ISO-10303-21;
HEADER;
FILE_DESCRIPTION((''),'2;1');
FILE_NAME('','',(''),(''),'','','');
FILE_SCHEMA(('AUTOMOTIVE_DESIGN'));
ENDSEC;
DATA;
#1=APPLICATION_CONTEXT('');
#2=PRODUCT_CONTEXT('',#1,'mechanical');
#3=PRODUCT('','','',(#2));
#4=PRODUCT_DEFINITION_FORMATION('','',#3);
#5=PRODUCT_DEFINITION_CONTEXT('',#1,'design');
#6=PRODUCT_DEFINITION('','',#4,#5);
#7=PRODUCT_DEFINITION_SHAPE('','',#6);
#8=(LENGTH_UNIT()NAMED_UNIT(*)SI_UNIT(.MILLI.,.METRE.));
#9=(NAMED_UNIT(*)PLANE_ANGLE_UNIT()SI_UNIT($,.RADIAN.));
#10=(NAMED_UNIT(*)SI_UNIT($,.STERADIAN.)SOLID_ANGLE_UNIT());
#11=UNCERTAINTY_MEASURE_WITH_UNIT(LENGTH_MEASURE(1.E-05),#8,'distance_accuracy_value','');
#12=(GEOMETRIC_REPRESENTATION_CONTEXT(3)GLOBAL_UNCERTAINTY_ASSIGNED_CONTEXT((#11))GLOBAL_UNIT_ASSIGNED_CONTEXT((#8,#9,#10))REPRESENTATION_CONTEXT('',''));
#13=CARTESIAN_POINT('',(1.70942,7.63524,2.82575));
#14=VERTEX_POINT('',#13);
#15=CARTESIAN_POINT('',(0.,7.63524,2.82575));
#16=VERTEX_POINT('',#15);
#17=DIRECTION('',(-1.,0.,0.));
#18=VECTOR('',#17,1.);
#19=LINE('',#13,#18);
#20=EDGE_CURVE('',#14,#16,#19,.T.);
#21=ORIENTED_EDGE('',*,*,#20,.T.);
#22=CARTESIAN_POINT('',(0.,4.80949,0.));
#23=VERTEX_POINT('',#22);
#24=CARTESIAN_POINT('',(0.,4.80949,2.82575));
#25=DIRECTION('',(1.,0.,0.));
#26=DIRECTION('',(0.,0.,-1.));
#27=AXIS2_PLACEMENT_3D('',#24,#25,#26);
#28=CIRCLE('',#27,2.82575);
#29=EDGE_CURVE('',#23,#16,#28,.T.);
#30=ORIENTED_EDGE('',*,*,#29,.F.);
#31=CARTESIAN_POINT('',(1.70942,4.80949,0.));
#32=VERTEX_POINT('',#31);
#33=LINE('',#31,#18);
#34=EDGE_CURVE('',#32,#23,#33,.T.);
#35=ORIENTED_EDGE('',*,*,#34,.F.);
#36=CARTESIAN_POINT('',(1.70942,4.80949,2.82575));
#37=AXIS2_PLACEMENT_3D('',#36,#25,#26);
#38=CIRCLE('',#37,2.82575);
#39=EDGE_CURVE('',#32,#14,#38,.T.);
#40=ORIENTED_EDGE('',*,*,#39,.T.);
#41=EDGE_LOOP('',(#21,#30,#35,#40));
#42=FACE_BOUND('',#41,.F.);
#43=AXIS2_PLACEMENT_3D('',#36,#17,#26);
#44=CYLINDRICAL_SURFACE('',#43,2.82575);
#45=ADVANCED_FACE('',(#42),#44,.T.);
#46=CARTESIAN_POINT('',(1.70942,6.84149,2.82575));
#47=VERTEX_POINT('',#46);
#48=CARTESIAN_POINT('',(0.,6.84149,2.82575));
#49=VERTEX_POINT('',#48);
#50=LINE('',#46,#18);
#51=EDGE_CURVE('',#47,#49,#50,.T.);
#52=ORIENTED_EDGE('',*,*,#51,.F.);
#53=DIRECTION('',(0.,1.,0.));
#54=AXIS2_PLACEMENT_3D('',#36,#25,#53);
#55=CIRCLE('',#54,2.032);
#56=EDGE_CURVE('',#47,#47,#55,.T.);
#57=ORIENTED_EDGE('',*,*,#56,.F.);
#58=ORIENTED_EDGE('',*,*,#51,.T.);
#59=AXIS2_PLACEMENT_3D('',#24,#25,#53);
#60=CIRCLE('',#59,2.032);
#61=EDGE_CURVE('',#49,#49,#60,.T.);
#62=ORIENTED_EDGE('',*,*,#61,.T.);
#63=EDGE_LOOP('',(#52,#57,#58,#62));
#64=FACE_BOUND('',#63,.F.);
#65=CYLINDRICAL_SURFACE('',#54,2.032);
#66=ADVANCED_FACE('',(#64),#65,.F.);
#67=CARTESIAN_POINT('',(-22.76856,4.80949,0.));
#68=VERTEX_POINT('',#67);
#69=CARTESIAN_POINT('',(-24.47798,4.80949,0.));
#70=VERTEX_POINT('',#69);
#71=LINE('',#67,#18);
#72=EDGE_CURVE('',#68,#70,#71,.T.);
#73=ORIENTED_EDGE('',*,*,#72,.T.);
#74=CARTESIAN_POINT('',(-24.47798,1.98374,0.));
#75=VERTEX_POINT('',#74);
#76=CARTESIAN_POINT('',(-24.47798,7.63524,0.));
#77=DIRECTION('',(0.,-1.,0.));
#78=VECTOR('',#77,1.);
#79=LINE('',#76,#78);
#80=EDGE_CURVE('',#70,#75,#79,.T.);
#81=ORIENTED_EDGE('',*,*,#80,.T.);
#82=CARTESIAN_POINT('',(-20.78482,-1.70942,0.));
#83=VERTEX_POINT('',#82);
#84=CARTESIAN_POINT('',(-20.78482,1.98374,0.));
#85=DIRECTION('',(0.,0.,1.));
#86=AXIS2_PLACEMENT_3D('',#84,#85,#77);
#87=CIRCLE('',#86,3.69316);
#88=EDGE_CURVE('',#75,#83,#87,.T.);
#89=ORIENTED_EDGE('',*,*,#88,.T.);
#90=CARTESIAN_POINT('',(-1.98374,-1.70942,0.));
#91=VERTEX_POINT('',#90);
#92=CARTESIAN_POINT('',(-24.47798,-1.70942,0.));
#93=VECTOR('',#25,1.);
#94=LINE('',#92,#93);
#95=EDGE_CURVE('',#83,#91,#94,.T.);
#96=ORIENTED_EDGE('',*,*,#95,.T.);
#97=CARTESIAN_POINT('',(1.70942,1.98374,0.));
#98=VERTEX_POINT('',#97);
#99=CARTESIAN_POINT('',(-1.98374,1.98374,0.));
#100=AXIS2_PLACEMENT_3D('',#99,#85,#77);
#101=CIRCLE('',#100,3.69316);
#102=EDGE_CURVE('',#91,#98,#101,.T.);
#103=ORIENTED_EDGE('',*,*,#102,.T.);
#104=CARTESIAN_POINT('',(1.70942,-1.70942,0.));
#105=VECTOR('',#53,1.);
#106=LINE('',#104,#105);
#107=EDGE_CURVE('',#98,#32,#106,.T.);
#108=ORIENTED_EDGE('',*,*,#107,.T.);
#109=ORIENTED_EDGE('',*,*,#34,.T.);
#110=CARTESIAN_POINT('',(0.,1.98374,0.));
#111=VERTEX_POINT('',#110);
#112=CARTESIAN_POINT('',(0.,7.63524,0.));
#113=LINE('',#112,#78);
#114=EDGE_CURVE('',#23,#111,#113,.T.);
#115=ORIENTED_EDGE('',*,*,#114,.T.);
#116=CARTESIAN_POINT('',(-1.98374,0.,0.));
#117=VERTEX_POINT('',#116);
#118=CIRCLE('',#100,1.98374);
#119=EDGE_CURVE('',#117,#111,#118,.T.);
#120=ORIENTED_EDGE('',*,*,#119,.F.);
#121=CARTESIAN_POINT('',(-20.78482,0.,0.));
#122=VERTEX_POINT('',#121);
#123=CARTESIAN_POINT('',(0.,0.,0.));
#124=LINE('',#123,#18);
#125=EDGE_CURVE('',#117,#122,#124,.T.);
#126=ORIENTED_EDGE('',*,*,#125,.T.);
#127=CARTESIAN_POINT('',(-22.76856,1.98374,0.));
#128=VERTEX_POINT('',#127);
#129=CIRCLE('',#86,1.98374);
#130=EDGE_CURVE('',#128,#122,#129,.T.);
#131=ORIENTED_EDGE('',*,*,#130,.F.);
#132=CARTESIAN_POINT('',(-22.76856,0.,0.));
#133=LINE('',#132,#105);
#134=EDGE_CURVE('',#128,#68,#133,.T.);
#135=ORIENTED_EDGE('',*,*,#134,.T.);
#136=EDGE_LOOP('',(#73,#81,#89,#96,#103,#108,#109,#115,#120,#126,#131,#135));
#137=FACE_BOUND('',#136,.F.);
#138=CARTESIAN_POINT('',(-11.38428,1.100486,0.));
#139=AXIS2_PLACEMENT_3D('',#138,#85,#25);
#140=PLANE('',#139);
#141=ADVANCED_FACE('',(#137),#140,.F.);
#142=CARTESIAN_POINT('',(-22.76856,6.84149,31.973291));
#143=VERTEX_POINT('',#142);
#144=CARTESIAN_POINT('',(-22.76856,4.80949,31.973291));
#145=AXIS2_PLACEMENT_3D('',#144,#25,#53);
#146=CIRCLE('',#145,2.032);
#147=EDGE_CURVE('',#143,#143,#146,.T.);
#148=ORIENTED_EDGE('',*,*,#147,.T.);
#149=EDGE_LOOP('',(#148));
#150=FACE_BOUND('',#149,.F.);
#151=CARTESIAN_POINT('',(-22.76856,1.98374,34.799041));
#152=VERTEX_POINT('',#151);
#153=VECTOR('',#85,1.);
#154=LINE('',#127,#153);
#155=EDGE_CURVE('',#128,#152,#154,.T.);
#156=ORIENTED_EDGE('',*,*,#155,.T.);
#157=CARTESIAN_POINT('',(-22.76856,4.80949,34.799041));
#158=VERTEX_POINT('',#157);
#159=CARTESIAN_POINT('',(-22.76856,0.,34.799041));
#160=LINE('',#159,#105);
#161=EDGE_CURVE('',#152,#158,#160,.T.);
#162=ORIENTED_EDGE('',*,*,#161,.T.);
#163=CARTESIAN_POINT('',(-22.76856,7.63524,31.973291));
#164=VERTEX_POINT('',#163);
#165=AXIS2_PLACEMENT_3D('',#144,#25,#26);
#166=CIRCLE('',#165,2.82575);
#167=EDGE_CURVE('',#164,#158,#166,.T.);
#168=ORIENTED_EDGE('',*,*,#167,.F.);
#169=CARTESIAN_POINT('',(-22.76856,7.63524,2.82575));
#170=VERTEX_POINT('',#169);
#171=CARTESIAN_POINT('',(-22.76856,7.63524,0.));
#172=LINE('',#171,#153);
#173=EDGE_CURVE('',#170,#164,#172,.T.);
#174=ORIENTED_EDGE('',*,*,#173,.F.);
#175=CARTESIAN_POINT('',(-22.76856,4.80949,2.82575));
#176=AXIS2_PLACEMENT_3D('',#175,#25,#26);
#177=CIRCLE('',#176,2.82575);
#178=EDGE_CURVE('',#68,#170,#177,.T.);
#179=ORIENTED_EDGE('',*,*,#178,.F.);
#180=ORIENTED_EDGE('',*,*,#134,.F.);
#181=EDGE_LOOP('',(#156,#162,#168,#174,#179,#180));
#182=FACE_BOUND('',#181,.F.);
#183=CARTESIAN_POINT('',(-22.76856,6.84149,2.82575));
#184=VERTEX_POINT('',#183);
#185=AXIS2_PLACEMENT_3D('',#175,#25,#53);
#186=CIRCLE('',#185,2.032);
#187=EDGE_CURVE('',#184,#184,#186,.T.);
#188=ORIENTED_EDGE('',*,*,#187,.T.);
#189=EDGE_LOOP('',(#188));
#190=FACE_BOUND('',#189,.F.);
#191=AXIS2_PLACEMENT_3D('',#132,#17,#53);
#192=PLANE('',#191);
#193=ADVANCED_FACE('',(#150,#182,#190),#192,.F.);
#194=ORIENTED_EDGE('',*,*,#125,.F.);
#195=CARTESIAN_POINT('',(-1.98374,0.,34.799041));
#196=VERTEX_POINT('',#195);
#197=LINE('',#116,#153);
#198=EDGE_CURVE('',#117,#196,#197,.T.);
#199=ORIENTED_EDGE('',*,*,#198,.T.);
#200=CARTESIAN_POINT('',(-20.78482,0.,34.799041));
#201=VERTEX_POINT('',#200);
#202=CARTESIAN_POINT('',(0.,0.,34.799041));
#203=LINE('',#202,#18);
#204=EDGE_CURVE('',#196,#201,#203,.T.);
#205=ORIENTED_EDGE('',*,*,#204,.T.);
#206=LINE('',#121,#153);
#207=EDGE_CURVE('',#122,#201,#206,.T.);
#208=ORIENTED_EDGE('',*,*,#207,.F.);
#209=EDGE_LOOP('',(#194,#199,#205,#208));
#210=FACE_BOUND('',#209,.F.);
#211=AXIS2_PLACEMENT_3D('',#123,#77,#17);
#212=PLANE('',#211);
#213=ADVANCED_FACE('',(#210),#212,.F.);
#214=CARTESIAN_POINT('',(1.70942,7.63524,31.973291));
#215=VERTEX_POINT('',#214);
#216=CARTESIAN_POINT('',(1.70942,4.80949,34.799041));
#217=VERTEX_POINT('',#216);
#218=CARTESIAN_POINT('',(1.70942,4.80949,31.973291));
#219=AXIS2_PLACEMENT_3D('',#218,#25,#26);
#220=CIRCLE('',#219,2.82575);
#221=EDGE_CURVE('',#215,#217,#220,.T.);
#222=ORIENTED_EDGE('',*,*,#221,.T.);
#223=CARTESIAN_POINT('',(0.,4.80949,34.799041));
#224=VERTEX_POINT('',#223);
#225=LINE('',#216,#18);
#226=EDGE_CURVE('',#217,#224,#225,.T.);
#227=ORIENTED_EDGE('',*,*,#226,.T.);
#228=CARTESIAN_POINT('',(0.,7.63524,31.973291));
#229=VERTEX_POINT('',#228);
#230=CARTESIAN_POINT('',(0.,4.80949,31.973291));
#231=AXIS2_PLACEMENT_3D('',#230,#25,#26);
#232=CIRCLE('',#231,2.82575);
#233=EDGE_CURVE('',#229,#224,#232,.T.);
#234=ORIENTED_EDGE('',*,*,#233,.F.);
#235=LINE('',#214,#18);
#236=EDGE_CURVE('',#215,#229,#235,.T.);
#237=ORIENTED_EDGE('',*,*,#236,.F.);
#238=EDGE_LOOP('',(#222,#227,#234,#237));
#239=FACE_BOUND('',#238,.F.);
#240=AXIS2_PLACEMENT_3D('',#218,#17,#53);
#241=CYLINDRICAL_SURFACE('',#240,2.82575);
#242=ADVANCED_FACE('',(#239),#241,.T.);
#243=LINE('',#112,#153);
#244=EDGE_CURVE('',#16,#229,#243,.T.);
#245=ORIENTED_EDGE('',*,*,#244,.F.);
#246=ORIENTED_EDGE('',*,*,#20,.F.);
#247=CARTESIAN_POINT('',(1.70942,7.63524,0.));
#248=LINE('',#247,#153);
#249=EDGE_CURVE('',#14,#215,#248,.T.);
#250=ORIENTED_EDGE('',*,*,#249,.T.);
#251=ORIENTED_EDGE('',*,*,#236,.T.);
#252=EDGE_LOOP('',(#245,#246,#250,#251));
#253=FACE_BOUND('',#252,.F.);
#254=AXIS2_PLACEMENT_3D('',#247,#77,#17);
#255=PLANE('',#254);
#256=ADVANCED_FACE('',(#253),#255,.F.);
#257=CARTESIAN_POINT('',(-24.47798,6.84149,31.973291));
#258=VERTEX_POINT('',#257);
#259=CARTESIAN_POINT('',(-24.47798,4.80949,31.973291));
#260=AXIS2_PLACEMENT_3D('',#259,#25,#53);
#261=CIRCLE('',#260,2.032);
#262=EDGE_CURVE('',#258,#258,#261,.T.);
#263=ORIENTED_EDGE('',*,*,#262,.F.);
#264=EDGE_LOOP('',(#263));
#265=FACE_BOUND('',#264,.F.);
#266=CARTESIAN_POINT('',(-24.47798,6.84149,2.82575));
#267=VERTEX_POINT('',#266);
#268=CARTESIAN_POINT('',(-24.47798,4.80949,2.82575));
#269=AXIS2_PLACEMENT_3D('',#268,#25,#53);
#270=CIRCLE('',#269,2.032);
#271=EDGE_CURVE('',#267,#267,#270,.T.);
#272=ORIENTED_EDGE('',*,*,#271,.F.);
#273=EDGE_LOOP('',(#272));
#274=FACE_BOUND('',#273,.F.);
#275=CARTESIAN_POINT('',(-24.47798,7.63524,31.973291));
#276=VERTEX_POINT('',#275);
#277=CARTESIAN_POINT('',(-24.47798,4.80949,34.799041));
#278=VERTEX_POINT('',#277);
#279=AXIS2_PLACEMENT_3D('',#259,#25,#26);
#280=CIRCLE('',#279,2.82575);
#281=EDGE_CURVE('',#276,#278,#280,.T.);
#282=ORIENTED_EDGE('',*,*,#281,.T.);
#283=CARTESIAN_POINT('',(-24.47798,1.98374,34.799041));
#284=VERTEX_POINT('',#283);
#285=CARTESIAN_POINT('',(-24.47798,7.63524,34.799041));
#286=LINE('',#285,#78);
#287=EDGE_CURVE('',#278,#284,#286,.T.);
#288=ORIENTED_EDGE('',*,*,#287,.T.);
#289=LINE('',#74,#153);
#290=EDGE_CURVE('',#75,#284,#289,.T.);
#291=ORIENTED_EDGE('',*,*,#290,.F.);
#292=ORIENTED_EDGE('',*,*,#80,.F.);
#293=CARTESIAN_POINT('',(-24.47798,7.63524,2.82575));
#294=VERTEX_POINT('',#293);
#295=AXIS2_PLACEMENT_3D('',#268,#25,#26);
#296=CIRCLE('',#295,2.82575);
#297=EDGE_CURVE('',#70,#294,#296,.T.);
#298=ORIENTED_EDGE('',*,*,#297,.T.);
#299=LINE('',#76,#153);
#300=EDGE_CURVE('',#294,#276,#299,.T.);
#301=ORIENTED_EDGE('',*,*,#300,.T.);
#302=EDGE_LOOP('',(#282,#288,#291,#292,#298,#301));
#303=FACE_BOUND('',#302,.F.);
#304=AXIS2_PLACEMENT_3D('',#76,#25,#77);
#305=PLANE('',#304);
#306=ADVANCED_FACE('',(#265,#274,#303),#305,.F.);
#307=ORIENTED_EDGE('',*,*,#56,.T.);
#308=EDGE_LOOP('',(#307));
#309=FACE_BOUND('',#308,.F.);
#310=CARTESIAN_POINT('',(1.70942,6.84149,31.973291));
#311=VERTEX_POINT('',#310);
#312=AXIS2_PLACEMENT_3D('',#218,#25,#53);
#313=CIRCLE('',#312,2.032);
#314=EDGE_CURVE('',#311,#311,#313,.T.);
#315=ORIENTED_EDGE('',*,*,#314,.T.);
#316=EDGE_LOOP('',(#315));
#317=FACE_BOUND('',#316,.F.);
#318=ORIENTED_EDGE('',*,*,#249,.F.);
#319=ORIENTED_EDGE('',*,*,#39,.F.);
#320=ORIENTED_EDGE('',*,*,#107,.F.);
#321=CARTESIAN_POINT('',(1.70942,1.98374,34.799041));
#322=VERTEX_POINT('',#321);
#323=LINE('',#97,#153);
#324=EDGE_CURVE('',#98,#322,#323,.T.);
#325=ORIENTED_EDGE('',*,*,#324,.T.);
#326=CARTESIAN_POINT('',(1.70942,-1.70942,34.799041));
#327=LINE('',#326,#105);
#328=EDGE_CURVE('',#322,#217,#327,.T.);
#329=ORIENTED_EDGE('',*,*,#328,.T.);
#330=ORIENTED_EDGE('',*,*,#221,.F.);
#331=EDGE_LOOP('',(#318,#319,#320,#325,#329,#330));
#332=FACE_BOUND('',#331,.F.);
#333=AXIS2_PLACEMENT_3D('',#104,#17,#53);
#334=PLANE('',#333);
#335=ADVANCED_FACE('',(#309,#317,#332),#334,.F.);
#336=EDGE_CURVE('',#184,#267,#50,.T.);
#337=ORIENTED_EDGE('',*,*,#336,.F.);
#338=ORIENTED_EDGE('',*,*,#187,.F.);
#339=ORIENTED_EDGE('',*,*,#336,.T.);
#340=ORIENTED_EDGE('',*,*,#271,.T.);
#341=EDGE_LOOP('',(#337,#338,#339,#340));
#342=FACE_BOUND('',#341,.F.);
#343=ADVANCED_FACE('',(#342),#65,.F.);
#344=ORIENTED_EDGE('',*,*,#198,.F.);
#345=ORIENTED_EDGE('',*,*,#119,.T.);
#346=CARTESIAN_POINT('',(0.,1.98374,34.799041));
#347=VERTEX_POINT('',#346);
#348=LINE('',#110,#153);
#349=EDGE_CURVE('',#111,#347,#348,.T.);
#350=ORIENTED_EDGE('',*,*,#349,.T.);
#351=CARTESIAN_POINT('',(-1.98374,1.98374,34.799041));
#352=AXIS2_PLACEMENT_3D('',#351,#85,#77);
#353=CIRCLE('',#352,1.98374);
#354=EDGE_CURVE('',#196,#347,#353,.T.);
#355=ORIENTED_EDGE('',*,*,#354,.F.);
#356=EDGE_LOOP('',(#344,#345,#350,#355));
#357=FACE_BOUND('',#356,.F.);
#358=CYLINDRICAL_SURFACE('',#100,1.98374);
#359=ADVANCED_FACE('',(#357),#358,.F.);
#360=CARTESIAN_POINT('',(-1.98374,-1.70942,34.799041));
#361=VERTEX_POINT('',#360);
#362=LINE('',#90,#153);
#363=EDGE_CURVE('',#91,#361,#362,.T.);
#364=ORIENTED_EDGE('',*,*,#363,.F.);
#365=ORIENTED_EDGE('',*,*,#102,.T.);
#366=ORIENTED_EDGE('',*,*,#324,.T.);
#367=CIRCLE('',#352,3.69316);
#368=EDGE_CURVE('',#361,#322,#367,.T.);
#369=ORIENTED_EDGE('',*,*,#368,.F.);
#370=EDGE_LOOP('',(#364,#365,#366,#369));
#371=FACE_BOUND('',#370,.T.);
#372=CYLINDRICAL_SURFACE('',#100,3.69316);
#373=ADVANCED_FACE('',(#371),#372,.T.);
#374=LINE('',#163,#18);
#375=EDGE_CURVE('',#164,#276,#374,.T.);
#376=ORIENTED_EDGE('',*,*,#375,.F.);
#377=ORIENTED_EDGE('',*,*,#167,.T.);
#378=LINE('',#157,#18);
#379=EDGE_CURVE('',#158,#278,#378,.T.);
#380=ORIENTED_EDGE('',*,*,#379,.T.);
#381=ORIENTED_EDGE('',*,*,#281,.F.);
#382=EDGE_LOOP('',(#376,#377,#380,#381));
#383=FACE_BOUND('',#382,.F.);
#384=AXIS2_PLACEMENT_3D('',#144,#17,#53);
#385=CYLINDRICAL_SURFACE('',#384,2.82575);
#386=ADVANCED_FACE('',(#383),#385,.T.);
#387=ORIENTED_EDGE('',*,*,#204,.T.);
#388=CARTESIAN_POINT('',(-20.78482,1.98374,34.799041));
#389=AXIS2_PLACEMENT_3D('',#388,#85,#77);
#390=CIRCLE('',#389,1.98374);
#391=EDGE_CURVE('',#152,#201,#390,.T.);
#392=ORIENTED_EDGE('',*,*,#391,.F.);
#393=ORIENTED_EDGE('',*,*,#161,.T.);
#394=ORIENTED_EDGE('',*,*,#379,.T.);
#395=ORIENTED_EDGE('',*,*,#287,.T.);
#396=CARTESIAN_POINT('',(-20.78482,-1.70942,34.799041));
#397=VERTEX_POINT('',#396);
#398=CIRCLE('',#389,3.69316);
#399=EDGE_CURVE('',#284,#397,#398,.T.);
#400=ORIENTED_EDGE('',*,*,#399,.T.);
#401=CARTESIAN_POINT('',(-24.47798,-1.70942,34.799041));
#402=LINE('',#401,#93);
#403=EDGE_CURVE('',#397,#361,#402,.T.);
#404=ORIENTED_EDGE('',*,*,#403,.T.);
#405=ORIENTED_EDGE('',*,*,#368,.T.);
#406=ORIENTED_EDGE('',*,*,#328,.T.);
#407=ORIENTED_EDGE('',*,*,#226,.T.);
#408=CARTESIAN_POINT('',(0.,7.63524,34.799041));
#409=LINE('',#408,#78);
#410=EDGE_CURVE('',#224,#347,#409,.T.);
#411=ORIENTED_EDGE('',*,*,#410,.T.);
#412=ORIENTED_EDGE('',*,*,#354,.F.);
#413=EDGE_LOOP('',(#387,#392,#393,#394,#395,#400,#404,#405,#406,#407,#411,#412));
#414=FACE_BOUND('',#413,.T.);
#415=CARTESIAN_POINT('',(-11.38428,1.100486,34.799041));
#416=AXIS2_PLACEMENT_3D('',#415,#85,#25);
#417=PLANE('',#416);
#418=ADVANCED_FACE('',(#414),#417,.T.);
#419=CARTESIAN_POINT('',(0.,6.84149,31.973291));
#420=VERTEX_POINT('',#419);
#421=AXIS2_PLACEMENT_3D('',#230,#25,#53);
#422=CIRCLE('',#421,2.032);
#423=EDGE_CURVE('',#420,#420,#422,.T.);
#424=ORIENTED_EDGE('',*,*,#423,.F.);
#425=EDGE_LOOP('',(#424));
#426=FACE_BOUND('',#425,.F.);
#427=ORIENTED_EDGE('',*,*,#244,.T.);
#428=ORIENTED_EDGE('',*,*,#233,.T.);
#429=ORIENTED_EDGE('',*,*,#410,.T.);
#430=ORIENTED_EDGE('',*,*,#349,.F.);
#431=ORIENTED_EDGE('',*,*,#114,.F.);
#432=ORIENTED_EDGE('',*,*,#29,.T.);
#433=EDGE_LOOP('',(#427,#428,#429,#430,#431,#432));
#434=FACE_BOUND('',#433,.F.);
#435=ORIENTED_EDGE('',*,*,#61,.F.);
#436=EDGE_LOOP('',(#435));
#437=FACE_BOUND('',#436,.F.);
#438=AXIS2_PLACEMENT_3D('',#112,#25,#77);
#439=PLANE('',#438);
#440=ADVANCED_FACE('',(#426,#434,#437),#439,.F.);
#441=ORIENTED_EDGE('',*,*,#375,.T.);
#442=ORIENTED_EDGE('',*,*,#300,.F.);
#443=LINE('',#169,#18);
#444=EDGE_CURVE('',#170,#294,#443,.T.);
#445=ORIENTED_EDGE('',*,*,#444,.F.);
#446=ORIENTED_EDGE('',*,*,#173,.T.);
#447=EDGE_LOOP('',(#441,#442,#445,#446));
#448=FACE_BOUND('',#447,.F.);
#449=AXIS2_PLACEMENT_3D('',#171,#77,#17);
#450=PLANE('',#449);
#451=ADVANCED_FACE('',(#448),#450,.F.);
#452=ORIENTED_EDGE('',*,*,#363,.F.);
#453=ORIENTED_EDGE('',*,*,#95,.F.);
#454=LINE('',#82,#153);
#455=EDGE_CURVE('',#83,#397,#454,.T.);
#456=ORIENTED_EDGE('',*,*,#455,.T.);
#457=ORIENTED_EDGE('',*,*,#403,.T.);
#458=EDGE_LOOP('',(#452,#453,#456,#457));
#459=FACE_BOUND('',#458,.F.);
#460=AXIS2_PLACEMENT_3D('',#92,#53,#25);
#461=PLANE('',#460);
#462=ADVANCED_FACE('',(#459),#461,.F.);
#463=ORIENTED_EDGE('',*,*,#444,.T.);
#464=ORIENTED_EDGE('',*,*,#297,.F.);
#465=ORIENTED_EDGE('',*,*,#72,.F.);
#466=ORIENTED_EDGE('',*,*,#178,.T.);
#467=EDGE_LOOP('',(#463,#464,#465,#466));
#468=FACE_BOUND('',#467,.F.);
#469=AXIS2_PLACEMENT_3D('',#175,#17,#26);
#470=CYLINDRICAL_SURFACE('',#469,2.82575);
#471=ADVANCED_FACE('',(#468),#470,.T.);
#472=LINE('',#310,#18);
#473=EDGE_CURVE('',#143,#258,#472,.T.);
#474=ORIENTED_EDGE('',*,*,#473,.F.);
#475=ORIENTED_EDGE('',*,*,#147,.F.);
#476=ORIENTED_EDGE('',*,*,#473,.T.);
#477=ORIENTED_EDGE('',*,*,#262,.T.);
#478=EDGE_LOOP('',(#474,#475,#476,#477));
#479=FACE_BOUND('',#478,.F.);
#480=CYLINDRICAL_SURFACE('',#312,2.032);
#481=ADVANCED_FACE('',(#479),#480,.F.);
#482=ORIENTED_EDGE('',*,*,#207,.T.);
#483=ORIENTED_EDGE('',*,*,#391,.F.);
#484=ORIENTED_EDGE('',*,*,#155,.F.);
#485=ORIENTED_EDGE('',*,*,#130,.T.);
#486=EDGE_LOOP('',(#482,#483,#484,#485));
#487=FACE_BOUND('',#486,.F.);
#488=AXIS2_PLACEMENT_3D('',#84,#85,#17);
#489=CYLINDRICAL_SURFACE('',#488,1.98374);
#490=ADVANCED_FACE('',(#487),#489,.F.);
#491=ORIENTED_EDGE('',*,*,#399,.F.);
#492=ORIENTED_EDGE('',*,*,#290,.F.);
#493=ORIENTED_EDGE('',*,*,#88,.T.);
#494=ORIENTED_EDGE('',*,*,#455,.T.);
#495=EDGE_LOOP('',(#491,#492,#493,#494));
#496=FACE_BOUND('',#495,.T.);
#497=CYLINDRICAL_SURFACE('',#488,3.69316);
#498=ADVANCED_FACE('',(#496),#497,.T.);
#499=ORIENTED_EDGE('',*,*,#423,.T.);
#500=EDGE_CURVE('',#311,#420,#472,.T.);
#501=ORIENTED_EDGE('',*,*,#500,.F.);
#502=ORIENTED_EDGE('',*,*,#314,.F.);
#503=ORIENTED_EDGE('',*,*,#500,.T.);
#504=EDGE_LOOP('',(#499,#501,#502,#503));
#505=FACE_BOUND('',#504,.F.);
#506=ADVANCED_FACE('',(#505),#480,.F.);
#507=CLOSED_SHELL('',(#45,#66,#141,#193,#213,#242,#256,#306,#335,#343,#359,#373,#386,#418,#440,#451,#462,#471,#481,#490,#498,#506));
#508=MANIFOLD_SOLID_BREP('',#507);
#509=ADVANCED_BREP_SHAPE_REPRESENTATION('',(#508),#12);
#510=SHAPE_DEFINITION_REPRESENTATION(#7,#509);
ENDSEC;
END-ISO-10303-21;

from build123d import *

# Parameters (mm, degrees)
F1_DEPTH = 34.7990414
F2_R     = 3.69316
F3_R     = 1.98374
F4_R     = 2.032
F5_DEPTH = 26.1874
F6_R     = 2.82575


with BuildPart() as f1:
    # F0 (on Top) → F1 (new body)
    with BuildSketch(Plane.XY):
        Polygon((0, 7.63524), (0, 0), (-22.76856, 0), (-22.76856, 7.63524), (-24.47798, 7.63524), (-24.47798, -1.70942), (1.70942, -1.70942), (1.70942, 7.63524), align=None)
    extrude(amount=F1_DEPTH)

    # F2
    f2_edges = [f1.edges().sort_by_distance(p)[0] for p in [
        (1.70942, -1.70942, 17.399521),
        (-24.47798, -1.70942, 17.399521),
    ]]
    fillet(f2_edges, radius=F2_R)

    # F3
    f3_edges = [f1.edges().sort_by_distance(p)[0] for p in [
        (0, 0, 17.399521),
        (-22.76856, 0, 17.399521),
    ]]
    fillet(f3_edges, radius=F3_R)

    # F4 (on face) → F5 (cut, through all)
    with BuildSketch(Plane.YZ.offset(1.70942)):
        with Locations((4.80949, 2.82575)):
            Circle(F4_R)
        with Locations((4.80949, 31.9732914)):
            Circle(F4_R)
    extrude(amount=-F5_DEPTH, mode=Mode.SUBTRACT)

    # F6
    f6_edges = [f1.edges().sort_by_distance(p)[0] for p in [
        (0.85471, 7.63524, 34.799041),
        (-23.62327, 7.63524, 34.799041),
        (0.85471, 7.63524, 0),
        (-23.62327, 7.63524, 0),
    ]]
    fillet(f6_edges, radius=F6_R)


solid = f1.part
